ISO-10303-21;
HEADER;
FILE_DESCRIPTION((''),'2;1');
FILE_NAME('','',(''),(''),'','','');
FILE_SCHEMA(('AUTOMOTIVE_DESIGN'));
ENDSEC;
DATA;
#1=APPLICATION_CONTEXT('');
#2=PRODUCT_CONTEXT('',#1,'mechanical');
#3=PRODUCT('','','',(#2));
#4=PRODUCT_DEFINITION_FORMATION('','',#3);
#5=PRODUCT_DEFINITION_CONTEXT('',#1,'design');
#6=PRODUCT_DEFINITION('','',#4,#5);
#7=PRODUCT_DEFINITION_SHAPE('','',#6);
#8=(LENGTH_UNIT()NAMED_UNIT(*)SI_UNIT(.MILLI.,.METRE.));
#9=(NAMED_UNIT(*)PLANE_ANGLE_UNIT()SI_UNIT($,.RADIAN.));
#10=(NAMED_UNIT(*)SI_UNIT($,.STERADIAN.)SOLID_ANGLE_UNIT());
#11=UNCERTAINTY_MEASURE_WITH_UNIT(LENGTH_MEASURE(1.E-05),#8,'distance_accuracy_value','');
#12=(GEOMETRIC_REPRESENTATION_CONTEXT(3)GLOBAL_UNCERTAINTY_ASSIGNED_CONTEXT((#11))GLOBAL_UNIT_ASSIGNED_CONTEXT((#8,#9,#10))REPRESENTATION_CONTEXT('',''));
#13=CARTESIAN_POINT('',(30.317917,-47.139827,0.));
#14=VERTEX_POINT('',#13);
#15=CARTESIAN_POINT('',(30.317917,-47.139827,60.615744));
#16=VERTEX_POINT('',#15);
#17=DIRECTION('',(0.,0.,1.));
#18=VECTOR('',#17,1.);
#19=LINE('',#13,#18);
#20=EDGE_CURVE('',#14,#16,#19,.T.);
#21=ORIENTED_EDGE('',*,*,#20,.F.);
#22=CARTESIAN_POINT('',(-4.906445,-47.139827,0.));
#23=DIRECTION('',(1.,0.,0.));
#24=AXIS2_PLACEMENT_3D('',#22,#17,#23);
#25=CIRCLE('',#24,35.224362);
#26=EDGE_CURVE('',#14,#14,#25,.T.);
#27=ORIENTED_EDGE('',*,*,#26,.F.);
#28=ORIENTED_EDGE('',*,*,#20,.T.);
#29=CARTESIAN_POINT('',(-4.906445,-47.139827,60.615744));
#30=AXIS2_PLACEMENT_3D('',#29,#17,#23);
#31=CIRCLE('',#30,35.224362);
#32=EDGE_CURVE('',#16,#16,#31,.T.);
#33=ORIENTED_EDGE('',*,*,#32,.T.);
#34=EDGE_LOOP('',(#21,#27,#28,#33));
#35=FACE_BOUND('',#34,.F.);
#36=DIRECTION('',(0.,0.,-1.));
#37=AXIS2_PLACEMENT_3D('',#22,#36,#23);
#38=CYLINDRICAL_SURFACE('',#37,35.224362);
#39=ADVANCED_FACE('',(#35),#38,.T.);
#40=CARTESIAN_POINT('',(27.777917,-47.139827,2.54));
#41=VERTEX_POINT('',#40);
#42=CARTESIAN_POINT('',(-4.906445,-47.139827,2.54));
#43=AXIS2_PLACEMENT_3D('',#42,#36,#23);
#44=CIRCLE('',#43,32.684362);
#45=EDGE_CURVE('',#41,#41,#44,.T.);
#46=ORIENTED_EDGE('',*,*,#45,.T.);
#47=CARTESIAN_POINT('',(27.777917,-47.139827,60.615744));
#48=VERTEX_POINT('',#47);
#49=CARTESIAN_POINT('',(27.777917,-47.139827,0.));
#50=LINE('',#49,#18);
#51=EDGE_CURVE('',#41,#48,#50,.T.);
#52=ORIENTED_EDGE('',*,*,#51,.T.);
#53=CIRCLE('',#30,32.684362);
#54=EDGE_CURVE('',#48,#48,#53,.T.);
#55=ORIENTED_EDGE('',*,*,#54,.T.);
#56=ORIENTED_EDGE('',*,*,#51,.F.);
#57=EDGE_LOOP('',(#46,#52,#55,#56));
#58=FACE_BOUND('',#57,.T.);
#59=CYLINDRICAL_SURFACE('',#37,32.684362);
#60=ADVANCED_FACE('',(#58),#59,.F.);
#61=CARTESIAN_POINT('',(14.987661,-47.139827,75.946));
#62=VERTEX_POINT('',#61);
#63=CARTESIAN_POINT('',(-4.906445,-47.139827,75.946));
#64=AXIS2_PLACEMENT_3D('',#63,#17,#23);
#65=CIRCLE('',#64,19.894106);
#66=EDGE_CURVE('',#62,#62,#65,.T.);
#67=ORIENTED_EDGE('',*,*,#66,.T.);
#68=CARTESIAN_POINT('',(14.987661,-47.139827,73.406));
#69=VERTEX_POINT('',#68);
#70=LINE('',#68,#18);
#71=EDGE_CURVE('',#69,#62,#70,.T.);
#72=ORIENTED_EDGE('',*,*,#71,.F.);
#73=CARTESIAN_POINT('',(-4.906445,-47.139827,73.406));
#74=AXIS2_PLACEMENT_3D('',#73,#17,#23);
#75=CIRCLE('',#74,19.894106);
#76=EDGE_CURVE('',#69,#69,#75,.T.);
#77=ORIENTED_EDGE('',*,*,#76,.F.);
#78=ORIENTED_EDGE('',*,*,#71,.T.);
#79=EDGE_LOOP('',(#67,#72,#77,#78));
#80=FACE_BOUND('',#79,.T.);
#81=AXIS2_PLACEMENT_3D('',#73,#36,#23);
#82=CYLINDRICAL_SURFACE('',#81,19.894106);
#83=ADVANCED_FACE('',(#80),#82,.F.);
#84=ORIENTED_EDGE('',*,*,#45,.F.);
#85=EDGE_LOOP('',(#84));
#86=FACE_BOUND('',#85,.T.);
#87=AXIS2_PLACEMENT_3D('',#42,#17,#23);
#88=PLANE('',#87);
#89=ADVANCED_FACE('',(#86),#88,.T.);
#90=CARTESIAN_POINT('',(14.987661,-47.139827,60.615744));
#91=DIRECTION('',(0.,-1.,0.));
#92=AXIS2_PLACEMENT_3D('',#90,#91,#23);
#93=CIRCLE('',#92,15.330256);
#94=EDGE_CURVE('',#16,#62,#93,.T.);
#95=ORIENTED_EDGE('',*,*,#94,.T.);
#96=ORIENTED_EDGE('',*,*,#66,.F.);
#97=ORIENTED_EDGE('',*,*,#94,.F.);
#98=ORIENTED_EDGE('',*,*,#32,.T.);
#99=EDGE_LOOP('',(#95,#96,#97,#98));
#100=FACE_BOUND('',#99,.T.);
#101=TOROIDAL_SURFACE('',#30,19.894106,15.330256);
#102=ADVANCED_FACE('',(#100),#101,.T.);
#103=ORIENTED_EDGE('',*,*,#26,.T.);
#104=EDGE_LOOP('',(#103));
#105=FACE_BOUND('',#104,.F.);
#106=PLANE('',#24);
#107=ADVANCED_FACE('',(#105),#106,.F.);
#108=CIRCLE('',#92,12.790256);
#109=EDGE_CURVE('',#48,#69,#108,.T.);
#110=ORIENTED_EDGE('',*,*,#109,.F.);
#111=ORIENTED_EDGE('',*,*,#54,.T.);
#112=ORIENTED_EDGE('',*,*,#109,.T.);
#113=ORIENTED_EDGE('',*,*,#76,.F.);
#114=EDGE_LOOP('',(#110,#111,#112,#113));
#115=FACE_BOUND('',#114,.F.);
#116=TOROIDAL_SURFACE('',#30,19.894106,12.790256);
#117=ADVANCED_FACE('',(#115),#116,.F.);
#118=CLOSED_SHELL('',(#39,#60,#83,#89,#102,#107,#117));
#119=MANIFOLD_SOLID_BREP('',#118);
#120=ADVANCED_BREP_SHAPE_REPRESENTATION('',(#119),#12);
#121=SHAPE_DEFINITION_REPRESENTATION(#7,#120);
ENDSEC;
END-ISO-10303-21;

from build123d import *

# Parameters (mm, degrees)
F0_R     = 35.2243618103
F1_DEPTH = 75.946
F2_R     = 15.3302561211
F3_T     = -2.54


# Not quite as in the source:
# - a shell that OpenCascade refuses in one call is made with other operations: the cavity is built on its own and cut out


with BuildPart() as f1:
    # F0 (on Top) → F1 (new body)
    with BuildSketch(Plane.XY):
        with Locations((-4.9064448103, -47.139827162)):
            Circle(F0_R)
    extrude(amount=F1_DEPTH)

    # F2
    f2_edges = [f1.edges().sort_by_distance(p)[0] for p in [
        (-40.130807, -47.139827, 75.946),
    ]]
    fillet(f2_edges, radius=F2_R)

    # F3: a shell. OpenCascade refuses it in one call, so the cavity is built on its own and cut out:
    # the body offset inwards by the wall thickness, plus a prism from it out through each open face.
    f3_core = offset(f1.part, amount=F3_T, mode=Mode.PRIVATE)
    f3_exits = [f3_core.faces().sort_by_distance(p)[0] for p in [
        (-4.906445, -47.139827, 73.406),
    ]]
    add(f3_core, mode=Mode.SUBTRACT)
    extrude(f3_exits, amount=-F3_T, mode=Mode.SUBTRACT)


solid = f1.part
